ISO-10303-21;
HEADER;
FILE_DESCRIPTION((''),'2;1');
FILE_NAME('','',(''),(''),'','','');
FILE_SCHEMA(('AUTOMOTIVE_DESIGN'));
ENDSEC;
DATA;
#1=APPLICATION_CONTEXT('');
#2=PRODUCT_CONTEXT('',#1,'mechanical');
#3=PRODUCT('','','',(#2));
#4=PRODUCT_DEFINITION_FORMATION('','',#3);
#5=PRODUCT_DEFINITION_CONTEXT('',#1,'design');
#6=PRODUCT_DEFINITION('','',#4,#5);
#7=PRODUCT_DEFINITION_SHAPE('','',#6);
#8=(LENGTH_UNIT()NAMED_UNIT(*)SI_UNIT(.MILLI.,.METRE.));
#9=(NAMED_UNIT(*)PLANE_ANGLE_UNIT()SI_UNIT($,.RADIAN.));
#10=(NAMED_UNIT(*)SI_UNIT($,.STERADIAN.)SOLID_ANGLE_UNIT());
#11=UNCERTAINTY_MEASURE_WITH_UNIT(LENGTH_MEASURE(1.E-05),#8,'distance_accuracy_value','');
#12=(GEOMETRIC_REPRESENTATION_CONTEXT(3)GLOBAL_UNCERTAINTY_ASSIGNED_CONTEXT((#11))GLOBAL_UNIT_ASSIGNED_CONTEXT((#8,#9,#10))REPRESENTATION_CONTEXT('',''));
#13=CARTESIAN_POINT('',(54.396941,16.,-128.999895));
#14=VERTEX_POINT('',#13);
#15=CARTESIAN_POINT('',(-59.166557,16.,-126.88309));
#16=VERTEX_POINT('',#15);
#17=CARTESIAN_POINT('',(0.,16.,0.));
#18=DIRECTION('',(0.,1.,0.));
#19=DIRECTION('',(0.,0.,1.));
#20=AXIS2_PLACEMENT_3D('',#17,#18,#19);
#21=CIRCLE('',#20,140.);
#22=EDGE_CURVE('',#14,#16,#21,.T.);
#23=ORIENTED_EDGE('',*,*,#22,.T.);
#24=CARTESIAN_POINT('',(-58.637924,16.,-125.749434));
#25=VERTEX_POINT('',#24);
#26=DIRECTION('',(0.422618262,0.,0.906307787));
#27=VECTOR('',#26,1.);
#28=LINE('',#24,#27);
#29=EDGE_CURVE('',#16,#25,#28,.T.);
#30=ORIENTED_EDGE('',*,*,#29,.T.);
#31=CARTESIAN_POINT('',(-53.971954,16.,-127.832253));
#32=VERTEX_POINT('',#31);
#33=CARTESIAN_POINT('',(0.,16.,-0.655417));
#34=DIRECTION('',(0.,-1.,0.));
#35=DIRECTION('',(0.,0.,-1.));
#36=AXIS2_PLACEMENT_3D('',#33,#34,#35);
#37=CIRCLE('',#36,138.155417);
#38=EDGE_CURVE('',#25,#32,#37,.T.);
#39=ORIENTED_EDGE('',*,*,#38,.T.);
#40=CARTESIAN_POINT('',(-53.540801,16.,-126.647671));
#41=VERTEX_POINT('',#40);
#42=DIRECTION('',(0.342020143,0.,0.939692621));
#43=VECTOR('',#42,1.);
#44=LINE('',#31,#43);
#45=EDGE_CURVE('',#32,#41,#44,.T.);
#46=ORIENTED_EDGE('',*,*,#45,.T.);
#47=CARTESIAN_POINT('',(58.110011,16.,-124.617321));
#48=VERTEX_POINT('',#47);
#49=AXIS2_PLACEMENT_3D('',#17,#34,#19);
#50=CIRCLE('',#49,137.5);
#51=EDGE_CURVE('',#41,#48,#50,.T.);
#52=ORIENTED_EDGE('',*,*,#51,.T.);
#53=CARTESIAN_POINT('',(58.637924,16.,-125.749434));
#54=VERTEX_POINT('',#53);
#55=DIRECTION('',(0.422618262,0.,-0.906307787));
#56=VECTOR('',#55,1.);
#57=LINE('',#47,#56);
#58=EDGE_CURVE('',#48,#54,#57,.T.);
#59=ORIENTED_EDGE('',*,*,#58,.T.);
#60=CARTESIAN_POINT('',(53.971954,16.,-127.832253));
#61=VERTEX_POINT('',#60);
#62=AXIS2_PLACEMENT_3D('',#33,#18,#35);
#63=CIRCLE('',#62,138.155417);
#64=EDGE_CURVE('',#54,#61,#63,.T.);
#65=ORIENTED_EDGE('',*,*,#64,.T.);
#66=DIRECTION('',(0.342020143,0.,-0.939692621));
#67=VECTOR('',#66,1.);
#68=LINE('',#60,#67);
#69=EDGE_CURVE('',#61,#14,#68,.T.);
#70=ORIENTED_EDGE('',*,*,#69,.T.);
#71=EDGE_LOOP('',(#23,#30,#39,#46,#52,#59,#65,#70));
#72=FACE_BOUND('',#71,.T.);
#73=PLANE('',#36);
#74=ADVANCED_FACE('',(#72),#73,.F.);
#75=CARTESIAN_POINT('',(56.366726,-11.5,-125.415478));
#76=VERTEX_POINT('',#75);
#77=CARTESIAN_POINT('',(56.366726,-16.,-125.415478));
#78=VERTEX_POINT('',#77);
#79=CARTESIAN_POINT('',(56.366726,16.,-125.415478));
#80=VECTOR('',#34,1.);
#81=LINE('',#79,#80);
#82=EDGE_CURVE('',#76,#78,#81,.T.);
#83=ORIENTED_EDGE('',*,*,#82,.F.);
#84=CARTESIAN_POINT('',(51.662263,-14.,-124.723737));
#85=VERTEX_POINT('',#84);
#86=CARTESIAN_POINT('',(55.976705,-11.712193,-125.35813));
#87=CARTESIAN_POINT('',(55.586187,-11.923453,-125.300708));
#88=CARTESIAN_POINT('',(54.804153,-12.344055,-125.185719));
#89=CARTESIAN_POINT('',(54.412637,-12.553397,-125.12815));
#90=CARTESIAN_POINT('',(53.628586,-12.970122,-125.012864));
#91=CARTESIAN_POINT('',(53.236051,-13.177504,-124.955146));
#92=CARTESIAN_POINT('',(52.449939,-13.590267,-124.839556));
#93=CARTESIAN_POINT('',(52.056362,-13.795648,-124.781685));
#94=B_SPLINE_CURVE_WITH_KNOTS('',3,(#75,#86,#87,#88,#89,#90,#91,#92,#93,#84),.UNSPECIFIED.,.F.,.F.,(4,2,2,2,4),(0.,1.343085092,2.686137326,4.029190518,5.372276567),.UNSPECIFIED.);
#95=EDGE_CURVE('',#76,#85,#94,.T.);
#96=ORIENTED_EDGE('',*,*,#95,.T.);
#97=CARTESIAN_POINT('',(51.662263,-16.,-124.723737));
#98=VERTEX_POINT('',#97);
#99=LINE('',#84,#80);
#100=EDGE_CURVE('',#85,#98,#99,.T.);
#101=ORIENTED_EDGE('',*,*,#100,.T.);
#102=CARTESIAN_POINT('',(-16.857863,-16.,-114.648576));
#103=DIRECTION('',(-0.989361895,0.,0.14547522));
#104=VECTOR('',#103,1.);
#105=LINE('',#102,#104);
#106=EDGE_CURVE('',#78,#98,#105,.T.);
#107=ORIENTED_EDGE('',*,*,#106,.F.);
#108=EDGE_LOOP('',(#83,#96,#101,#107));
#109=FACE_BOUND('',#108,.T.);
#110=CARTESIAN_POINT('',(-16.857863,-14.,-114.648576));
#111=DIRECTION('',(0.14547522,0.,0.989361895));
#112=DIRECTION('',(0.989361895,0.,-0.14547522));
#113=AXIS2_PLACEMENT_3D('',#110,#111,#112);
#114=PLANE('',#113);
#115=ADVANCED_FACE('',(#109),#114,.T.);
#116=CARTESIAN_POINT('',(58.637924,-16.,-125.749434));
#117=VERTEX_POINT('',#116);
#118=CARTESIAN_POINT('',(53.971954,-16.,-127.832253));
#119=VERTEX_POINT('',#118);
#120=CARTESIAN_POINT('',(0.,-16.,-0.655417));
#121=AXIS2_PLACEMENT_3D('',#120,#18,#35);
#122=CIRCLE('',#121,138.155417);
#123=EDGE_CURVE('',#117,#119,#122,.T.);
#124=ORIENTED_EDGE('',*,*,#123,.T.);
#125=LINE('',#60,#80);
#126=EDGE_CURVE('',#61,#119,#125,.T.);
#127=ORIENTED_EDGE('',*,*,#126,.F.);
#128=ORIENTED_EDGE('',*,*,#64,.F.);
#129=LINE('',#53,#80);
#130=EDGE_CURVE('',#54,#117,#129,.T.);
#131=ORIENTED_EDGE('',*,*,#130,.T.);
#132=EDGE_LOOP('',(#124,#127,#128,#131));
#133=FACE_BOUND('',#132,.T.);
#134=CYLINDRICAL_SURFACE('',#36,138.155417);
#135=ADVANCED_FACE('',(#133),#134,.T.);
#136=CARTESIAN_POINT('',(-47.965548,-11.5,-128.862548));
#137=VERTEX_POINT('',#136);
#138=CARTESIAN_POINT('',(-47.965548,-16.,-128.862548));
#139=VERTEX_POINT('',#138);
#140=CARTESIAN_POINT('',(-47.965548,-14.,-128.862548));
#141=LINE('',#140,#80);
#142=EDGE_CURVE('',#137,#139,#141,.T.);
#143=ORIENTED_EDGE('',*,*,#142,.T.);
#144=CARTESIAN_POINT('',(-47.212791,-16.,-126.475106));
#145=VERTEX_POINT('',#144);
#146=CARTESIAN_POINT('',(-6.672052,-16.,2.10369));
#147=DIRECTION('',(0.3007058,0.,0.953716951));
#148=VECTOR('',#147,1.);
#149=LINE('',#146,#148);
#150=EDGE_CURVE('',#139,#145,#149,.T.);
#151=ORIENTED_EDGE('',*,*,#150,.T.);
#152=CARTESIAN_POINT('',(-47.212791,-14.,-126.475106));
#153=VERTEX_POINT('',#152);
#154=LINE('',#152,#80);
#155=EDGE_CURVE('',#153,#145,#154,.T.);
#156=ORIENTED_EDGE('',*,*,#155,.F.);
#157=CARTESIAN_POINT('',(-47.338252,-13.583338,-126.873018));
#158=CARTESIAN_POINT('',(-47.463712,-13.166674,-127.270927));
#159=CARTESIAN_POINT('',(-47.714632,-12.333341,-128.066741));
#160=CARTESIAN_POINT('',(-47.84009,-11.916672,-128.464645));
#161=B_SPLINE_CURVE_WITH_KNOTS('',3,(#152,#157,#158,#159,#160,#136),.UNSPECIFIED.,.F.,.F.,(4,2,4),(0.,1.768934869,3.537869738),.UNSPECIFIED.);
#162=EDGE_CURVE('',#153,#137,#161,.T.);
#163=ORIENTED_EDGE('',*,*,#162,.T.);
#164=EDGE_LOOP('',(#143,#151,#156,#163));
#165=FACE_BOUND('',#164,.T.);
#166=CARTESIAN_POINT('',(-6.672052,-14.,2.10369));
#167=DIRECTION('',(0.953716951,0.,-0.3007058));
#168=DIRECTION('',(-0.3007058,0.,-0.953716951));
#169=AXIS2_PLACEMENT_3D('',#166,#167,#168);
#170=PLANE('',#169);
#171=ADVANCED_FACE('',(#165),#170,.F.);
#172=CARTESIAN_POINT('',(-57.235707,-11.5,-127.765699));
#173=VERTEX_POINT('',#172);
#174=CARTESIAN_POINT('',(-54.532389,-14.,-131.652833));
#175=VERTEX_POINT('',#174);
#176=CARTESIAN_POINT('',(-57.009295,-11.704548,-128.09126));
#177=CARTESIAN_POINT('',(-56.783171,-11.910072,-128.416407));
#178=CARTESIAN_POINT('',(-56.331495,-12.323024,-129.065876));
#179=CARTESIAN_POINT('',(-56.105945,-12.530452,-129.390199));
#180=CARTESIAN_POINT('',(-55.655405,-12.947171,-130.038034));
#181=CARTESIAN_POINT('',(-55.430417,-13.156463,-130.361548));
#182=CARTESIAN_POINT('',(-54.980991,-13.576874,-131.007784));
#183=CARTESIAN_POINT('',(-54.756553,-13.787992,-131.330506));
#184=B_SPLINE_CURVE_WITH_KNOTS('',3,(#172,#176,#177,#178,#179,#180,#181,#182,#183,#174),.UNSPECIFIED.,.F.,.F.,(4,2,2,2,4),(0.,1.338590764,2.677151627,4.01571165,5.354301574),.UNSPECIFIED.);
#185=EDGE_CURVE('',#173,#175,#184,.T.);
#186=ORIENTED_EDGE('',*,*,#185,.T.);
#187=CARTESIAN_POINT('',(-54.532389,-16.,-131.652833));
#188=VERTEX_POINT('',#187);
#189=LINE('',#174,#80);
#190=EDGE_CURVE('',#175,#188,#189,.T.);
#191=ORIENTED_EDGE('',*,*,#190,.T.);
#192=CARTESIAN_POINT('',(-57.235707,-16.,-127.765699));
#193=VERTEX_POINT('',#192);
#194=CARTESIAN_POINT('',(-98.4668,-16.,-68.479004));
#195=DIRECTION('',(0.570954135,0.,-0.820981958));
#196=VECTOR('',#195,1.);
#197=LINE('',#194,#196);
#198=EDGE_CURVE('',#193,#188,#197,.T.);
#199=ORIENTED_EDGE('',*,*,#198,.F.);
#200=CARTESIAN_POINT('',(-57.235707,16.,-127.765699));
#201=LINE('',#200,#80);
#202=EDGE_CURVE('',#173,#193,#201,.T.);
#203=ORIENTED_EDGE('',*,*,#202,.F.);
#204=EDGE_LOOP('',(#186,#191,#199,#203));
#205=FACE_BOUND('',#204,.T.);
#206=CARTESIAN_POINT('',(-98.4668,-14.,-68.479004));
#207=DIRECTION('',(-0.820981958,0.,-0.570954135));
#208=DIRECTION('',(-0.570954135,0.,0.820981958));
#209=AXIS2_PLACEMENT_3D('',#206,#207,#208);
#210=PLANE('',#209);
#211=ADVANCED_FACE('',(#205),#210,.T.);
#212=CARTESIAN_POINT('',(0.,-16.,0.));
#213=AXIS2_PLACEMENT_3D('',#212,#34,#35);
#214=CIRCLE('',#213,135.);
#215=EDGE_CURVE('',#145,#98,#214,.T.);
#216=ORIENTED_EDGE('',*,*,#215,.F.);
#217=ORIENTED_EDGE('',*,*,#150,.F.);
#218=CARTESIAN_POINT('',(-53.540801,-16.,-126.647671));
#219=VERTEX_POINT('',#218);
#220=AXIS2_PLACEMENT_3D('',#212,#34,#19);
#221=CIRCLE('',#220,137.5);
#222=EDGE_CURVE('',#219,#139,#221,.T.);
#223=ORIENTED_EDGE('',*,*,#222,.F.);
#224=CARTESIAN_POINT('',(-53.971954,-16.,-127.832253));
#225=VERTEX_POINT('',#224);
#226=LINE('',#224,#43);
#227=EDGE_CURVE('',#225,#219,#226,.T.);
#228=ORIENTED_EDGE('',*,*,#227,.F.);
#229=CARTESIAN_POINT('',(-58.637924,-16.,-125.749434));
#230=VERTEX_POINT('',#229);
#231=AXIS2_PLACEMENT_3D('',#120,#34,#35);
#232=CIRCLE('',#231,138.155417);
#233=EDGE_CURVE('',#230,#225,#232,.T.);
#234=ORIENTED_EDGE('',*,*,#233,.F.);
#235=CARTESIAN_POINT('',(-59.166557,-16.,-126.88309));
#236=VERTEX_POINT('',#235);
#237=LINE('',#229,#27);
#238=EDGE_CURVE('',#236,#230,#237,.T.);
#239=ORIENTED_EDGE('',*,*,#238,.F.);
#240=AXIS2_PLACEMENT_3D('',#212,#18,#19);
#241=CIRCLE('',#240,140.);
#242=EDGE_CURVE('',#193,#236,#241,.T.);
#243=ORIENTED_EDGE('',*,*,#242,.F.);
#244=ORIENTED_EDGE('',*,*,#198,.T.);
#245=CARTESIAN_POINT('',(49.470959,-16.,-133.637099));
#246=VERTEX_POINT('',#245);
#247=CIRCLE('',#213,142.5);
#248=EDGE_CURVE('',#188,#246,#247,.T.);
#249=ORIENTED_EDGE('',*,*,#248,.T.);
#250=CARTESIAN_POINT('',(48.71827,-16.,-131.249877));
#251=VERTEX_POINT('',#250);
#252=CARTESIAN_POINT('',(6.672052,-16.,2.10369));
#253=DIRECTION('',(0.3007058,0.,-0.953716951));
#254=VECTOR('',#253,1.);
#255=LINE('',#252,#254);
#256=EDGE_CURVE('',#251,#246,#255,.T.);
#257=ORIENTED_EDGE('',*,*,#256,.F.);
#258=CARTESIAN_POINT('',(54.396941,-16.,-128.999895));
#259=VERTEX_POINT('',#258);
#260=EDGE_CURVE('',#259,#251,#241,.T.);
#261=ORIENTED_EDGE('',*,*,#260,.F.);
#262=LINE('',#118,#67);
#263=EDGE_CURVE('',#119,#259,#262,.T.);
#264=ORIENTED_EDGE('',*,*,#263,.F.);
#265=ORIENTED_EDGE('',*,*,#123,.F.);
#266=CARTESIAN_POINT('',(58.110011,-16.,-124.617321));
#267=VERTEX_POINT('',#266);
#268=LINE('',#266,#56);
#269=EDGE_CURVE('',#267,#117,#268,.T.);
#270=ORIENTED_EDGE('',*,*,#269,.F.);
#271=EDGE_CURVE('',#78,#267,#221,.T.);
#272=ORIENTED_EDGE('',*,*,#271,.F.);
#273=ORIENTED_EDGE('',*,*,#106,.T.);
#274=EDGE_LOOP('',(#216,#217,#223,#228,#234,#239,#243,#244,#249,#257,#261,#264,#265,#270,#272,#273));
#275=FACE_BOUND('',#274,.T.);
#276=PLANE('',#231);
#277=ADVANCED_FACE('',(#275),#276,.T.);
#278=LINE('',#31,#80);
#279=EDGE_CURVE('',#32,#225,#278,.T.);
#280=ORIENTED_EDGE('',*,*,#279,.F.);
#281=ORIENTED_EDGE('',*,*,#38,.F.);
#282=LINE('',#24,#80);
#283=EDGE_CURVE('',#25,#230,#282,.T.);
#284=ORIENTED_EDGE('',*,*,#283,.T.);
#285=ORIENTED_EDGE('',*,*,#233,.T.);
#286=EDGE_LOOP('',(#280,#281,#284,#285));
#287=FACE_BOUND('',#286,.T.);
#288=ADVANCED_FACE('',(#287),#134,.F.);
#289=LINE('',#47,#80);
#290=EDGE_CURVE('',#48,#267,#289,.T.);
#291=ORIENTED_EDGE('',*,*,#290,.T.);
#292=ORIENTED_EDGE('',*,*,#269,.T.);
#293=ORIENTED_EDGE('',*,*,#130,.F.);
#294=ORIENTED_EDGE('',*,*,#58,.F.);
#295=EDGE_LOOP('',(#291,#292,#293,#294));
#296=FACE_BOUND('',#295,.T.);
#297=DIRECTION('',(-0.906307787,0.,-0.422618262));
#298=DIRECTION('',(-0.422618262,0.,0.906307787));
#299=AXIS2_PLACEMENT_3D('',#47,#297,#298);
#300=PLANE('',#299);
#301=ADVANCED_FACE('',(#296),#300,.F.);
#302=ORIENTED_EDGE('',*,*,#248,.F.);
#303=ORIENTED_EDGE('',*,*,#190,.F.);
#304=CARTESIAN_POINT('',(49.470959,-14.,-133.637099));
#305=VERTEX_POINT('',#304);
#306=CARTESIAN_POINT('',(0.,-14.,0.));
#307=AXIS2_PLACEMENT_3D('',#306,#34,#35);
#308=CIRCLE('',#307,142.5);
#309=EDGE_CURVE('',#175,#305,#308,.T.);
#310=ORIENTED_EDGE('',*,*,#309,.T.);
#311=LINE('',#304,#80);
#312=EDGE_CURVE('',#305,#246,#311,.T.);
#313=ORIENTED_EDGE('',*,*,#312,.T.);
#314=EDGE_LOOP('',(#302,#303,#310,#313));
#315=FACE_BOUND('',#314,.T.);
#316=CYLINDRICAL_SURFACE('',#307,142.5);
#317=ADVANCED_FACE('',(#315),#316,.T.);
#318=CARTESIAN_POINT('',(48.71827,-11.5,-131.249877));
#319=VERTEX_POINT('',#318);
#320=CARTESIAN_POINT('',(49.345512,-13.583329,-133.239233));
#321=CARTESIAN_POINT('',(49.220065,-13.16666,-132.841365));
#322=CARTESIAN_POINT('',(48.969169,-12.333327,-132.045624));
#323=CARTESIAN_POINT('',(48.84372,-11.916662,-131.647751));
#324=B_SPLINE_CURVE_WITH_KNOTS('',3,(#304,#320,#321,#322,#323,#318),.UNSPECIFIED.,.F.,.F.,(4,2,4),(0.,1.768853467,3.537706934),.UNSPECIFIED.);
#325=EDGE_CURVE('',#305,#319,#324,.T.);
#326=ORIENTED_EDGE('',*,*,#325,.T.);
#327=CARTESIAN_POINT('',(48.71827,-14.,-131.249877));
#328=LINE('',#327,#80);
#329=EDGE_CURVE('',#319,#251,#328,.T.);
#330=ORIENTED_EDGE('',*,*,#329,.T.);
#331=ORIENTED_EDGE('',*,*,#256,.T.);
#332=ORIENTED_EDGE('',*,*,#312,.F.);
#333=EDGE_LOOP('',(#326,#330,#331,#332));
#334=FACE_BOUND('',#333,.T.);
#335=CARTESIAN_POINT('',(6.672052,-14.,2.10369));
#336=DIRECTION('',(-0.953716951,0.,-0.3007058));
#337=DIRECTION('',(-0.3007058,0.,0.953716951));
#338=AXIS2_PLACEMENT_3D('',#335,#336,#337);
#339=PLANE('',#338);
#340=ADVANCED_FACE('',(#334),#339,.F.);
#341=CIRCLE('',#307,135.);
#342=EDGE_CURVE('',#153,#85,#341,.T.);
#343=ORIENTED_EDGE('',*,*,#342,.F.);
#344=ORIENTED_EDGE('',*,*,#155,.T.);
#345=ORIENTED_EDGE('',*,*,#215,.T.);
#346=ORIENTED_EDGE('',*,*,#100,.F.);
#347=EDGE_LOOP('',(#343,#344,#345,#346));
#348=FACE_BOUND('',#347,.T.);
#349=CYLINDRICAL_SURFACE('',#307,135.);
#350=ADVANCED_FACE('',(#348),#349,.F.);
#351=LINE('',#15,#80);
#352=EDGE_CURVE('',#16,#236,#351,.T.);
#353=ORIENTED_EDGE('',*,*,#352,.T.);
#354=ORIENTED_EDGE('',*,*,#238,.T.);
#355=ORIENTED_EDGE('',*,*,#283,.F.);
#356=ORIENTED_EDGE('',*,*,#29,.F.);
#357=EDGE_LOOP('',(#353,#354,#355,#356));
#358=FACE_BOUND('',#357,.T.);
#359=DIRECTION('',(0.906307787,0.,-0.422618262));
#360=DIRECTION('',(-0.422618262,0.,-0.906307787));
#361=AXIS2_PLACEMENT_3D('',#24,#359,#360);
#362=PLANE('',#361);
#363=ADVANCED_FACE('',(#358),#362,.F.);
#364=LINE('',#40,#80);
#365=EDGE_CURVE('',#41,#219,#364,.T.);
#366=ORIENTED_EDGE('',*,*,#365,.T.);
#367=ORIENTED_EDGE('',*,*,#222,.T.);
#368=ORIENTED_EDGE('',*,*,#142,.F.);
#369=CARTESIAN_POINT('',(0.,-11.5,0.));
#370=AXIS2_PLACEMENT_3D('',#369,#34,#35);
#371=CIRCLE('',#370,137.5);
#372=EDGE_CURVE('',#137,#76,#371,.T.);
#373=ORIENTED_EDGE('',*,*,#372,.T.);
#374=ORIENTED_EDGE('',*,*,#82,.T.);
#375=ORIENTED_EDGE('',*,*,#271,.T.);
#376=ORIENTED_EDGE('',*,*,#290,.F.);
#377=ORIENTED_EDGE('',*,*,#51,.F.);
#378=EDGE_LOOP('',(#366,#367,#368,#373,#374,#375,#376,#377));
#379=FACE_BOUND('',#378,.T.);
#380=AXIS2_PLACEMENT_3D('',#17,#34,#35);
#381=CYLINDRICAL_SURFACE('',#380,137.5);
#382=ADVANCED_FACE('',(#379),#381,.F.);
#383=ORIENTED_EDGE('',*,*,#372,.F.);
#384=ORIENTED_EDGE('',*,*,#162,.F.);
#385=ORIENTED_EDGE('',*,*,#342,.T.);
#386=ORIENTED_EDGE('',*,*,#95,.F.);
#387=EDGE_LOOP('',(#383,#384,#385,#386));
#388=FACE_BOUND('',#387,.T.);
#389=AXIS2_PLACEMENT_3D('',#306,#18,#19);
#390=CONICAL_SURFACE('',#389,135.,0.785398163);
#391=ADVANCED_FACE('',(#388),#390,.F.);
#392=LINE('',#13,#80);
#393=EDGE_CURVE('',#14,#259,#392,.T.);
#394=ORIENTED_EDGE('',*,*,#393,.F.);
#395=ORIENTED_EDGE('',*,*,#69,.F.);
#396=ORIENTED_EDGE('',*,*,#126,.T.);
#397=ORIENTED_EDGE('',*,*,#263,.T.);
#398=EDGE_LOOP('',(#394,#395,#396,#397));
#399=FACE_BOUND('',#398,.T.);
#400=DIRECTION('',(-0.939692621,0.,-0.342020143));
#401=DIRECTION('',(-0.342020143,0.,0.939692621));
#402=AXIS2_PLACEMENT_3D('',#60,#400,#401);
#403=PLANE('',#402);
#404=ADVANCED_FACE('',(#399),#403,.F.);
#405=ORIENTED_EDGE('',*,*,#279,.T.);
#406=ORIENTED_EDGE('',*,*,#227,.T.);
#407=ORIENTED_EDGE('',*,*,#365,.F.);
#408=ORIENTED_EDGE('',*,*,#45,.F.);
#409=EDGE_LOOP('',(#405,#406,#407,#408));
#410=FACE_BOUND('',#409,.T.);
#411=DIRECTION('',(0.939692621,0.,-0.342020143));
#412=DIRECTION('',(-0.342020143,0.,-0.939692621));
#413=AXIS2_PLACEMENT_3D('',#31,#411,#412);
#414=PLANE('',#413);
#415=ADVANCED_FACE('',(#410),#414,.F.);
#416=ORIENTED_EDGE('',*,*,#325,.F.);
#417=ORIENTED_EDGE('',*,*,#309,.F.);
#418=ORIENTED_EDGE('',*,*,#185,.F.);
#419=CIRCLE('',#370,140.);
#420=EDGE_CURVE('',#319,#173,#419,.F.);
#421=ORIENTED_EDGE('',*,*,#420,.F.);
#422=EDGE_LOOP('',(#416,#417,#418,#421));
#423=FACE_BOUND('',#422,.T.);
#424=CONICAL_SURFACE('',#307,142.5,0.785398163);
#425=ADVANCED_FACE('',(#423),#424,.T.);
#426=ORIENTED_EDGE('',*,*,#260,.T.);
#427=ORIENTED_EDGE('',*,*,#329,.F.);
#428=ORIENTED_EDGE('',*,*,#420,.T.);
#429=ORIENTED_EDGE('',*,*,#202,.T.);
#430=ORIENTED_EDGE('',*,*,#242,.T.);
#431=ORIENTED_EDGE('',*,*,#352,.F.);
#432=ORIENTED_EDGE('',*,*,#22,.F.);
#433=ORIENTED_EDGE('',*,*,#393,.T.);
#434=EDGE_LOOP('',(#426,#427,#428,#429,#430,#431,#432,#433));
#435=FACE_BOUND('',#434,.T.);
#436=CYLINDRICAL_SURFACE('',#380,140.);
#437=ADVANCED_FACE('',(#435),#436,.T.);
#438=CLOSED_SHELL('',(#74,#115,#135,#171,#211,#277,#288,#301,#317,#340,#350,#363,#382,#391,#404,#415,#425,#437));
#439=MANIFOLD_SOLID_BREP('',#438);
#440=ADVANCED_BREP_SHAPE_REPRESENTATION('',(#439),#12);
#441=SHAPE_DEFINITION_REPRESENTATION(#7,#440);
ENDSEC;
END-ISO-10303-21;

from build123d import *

# Parameters (mm, degrees)
BOSS_EXTRUDE1_DEPTH = 16
BOSS_EXTRUDE2_START = -2
BOSS_EXTRUDE2_DEPTH = 2
CHAMFER2_SIZE       = 2.5


with BuildPart() as part:
    # Sketch2 → Boss-Extrude1 (new, symmetric)
    with BuildSketch(Plane(origin=(0, 0, 0), x_dir=(1, 0, 0), z_dir=(0, 1, 0))):
        with BuildLine():
            Line((-58.637924155, 125.749434155), (-59.166556644, 126.883090185))
            ThreePointArc((-59.166556644, 126.883090185), (-2.609123321, 139.975685301), (54.396940678, 128.999894748))
            Line((54.396940678, 128.999894748), (53.971953665, 127.832252528))
            ThreePointArc((53.971953665, 127.832252528), (56.314568974, 126.8124168), (58.637924155, 125.749434155))
            Line((58.637924155, 125.749434155), (58.110010989, 124.617320718))
            ThreePointArc((58.110010989, 124.617320718), (2.5, 137.477270849), (-53.540801289, 126.647671109))
            Line((-53.540801289, 126.647671109), (-53.971953665, 127.832252528))
            ThreePointArc((-53.971953665, 127.832252528), (-56.314568974, 126.8124168), (-58.637924155, 125.749434155))
        make_face()
    extrude(amount=BOSS_EXTRUDE1_DEPTH, both=True)

    # Sketch3 → Boss-Extrude2 (add)
    with BuildSketch(Plane.XZ.offset(16).offset(BOSS_EXTRUDE2_START)):
        with BuildLine():
            Line((49.470958786, -133.637099029), (48.718270464, -131.249876659))
            ThreePointArc((48.718270464, -131.249876659), (-2.609123321, -139.975685301), (-53.575680531, -129.343134552))
            Line((-53.575680531, -129.343134552), (-58.637924155, -125.749434155))
            Line((-58.637924155, -125.749434155), (-54.532389112, -131.652833383))
            ThreePointArc((-54.532389112, -131.652833383), (-2.718243325, -142.474071863), (49.470958786, -133.637099029))
        make_face()
        with BuildLine():
            Line((52.61897195, -127.033435721), (58.637924155, -125.749434155))
            Line((58.637924155, -125.749434155), (51.662263369, -124.723736889))
            ThreePointArc((51.662263369, -124.723736889), (2.390873136, -134.978826953), (-47.212790972, -126.475105727))
            Line((-47.212790972, -126.475105727), (-47.965548485, -128.86254754))
            ThreePointArc((-47.965548485, -128.86254754), (2.5, -137.477270849), (52.61897195, -127.033435721))
        make_face()
    extrude(amount=BOSS_EXTRUDE2_DEPTH)

    # Chamfer2
    chamfer2_edges = [part.edges().sort_by_distance(p)[0] for p in [
        (-4.601256001, -14, -139.924366867),
        (4.540431296, -14, -137.425014039),
    ]]
    chamfer(chamfer2_edges, length=CHAMFER2_SIZE - 0.0001)  # a hair under: the kernel refuses the full size


solid = part.part
